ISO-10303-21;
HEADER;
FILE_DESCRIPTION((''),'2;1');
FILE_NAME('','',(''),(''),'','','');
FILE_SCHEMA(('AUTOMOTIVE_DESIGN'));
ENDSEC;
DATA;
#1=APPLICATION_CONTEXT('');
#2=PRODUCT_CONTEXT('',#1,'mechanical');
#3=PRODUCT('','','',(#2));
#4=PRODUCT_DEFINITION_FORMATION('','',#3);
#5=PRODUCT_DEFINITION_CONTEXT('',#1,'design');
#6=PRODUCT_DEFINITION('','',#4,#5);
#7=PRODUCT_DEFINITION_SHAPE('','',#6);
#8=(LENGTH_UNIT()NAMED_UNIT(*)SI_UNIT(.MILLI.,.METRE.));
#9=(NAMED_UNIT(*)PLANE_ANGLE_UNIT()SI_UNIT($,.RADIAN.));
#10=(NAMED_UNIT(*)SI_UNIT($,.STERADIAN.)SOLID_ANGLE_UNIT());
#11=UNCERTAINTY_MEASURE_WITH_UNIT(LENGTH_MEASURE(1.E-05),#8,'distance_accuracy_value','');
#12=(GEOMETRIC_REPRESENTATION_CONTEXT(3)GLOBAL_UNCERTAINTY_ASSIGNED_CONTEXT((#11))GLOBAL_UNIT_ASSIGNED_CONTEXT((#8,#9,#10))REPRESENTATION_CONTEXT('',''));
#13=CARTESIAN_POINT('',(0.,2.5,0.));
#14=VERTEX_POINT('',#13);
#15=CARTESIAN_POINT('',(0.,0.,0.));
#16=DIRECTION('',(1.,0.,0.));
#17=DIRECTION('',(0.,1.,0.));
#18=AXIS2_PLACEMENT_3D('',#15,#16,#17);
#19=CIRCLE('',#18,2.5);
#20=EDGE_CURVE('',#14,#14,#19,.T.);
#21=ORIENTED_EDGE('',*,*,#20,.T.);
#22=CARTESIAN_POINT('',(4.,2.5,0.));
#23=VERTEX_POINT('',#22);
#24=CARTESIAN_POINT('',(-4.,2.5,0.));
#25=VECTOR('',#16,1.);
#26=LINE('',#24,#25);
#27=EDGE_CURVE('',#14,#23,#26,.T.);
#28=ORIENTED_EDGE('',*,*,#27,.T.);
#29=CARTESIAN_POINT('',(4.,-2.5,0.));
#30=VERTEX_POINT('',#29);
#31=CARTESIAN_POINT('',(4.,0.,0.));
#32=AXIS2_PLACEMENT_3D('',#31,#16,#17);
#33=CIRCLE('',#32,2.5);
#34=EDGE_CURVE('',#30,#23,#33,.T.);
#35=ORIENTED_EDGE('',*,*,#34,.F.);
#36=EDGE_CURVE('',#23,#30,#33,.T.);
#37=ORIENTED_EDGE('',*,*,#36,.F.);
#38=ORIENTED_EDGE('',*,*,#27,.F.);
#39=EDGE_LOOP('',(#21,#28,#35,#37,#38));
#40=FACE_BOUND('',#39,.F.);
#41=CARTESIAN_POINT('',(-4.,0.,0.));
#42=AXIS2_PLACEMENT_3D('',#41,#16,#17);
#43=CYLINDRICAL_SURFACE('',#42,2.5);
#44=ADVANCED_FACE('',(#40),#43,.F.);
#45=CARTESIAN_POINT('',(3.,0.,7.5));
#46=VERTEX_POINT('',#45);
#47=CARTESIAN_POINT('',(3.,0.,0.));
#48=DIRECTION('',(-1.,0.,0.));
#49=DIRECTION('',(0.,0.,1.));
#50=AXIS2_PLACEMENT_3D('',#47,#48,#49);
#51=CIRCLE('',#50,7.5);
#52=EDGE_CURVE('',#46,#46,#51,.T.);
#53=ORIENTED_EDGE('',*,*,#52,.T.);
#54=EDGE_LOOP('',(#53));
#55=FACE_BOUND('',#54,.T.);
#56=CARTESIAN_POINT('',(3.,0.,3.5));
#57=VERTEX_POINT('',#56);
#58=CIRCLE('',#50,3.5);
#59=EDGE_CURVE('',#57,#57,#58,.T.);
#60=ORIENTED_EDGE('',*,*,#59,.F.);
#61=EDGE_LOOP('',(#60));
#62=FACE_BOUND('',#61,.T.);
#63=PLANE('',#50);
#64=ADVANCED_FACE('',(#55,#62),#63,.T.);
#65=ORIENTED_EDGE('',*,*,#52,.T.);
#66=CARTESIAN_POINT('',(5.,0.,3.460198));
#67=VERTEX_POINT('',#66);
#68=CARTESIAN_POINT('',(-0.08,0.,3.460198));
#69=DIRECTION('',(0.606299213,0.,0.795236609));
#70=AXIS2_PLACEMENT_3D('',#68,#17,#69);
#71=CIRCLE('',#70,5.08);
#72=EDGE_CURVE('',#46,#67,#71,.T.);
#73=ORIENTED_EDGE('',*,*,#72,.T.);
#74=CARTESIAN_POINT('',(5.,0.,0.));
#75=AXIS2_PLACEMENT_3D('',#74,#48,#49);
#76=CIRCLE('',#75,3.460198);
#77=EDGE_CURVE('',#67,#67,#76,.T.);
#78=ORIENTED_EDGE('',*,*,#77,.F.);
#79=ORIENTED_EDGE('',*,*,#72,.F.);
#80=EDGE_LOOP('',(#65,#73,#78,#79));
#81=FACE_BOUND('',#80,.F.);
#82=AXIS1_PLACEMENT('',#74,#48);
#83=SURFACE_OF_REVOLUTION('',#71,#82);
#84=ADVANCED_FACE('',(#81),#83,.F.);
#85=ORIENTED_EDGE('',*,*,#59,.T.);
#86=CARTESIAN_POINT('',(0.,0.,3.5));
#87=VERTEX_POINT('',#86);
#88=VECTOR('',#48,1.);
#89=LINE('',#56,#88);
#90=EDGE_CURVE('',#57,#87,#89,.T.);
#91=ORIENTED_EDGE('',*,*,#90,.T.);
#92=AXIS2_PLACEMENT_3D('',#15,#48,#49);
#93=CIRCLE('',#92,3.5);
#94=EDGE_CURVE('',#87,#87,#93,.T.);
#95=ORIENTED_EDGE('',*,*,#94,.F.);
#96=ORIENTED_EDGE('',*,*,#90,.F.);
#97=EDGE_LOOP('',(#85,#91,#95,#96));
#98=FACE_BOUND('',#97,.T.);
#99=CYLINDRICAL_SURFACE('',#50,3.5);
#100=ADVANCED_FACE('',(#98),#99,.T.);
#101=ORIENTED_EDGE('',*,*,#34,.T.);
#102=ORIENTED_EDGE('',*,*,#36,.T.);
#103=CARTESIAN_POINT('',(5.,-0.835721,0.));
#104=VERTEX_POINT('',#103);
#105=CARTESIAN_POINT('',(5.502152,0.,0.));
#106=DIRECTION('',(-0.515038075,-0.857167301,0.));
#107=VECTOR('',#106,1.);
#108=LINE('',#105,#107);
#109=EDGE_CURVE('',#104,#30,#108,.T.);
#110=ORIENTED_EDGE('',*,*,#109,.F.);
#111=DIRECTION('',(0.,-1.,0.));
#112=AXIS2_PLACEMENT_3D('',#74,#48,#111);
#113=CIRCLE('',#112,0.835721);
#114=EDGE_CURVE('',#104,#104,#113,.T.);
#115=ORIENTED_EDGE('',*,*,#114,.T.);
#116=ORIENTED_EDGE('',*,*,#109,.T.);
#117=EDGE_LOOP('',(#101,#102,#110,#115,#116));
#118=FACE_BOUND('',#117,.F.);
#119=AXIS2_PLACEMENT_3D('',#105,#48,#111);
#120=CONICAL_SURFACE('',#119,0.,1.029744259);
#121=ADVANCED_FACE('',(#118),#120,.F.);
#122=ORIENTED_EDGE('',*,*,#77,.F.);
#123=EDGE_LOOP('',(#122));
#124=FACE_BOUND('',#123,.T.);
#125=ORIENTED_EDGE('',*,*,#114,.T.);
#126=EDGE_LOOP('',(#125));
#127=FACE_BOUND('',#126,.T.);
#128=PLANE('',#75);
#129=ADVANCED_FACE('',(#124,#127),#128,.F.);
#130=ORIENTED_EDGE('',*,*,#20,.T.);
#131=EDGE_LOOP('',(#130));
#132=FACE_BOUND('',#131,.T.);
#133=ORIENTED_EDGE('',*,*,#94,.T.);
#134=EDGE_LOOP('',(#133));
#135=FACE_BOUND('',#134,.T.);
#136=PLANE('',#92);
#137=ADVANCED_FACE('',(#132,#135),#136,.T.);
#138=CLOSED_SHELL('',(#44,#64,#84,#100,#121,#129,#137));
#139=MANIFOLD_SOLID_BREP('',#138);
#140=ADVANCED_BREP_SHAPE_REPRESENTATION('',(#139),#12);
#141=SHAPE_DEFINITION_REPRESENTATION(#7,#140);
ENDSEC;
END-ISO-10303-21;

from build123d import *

# Parameters (mm, degrees)
F4_D     = 5
F4_DEPTH = 4
F4_TIP   = 1.5021515476


# Not quite as in the source:
# - a fillet or chamfer that OpenCascade refuses, or shapes differently, is made with other operations: its cross-section is extruded or revolved along the edge and cut away or added


with BuildPart() as f3:
    # F0 (on Front) → F3 (revolve)
    with BuildSketch(Plane.XZ):
        Polygon((3, 3.5), (0, 3.5), (0, 0), (5, 0), (5, 7.5), (3, 7.5), align=None)
    revolve(axis=Axis((2.5, 0, 0), (-1, 0, 0)))

    # F4
    with Locations(Plane(origin=(0, 0, 0), x_dir=(0, -1, 0), z_dir=(-1, 0, 0))):
        with Locations((0, 0)):
            Hole(F4_D / 2, depth=F4_DEPTH)
            with Locations((0, 0, -(F4_DEPTH + F4_TIP / 2))):  # 118° drill point
                Cone(0, F4_D / 2, F4_TIP, mode=Mode.SUBTRACT)

    # F2: fillet of radius 5.08 on 1 edges, made by hand

    # F2_s1 → F2_t2 (revolve, cut)
    with BuildSketch(Plane.XZ):
        with BuildLine():
            ThreePointArc((3, 7.5), (4.4726256161, 5.7140835586), (5, 3.4601980247))
            Line((5, 3.4601980247), (5, 7.5))
            Line((5, 7.5), (3, 7.5))
        make_face()
    revolve(axis=Axis((5, 0, 0), (-1, 0, 0)), mode=Mode.SUBTRACT)


solid = f3.part
